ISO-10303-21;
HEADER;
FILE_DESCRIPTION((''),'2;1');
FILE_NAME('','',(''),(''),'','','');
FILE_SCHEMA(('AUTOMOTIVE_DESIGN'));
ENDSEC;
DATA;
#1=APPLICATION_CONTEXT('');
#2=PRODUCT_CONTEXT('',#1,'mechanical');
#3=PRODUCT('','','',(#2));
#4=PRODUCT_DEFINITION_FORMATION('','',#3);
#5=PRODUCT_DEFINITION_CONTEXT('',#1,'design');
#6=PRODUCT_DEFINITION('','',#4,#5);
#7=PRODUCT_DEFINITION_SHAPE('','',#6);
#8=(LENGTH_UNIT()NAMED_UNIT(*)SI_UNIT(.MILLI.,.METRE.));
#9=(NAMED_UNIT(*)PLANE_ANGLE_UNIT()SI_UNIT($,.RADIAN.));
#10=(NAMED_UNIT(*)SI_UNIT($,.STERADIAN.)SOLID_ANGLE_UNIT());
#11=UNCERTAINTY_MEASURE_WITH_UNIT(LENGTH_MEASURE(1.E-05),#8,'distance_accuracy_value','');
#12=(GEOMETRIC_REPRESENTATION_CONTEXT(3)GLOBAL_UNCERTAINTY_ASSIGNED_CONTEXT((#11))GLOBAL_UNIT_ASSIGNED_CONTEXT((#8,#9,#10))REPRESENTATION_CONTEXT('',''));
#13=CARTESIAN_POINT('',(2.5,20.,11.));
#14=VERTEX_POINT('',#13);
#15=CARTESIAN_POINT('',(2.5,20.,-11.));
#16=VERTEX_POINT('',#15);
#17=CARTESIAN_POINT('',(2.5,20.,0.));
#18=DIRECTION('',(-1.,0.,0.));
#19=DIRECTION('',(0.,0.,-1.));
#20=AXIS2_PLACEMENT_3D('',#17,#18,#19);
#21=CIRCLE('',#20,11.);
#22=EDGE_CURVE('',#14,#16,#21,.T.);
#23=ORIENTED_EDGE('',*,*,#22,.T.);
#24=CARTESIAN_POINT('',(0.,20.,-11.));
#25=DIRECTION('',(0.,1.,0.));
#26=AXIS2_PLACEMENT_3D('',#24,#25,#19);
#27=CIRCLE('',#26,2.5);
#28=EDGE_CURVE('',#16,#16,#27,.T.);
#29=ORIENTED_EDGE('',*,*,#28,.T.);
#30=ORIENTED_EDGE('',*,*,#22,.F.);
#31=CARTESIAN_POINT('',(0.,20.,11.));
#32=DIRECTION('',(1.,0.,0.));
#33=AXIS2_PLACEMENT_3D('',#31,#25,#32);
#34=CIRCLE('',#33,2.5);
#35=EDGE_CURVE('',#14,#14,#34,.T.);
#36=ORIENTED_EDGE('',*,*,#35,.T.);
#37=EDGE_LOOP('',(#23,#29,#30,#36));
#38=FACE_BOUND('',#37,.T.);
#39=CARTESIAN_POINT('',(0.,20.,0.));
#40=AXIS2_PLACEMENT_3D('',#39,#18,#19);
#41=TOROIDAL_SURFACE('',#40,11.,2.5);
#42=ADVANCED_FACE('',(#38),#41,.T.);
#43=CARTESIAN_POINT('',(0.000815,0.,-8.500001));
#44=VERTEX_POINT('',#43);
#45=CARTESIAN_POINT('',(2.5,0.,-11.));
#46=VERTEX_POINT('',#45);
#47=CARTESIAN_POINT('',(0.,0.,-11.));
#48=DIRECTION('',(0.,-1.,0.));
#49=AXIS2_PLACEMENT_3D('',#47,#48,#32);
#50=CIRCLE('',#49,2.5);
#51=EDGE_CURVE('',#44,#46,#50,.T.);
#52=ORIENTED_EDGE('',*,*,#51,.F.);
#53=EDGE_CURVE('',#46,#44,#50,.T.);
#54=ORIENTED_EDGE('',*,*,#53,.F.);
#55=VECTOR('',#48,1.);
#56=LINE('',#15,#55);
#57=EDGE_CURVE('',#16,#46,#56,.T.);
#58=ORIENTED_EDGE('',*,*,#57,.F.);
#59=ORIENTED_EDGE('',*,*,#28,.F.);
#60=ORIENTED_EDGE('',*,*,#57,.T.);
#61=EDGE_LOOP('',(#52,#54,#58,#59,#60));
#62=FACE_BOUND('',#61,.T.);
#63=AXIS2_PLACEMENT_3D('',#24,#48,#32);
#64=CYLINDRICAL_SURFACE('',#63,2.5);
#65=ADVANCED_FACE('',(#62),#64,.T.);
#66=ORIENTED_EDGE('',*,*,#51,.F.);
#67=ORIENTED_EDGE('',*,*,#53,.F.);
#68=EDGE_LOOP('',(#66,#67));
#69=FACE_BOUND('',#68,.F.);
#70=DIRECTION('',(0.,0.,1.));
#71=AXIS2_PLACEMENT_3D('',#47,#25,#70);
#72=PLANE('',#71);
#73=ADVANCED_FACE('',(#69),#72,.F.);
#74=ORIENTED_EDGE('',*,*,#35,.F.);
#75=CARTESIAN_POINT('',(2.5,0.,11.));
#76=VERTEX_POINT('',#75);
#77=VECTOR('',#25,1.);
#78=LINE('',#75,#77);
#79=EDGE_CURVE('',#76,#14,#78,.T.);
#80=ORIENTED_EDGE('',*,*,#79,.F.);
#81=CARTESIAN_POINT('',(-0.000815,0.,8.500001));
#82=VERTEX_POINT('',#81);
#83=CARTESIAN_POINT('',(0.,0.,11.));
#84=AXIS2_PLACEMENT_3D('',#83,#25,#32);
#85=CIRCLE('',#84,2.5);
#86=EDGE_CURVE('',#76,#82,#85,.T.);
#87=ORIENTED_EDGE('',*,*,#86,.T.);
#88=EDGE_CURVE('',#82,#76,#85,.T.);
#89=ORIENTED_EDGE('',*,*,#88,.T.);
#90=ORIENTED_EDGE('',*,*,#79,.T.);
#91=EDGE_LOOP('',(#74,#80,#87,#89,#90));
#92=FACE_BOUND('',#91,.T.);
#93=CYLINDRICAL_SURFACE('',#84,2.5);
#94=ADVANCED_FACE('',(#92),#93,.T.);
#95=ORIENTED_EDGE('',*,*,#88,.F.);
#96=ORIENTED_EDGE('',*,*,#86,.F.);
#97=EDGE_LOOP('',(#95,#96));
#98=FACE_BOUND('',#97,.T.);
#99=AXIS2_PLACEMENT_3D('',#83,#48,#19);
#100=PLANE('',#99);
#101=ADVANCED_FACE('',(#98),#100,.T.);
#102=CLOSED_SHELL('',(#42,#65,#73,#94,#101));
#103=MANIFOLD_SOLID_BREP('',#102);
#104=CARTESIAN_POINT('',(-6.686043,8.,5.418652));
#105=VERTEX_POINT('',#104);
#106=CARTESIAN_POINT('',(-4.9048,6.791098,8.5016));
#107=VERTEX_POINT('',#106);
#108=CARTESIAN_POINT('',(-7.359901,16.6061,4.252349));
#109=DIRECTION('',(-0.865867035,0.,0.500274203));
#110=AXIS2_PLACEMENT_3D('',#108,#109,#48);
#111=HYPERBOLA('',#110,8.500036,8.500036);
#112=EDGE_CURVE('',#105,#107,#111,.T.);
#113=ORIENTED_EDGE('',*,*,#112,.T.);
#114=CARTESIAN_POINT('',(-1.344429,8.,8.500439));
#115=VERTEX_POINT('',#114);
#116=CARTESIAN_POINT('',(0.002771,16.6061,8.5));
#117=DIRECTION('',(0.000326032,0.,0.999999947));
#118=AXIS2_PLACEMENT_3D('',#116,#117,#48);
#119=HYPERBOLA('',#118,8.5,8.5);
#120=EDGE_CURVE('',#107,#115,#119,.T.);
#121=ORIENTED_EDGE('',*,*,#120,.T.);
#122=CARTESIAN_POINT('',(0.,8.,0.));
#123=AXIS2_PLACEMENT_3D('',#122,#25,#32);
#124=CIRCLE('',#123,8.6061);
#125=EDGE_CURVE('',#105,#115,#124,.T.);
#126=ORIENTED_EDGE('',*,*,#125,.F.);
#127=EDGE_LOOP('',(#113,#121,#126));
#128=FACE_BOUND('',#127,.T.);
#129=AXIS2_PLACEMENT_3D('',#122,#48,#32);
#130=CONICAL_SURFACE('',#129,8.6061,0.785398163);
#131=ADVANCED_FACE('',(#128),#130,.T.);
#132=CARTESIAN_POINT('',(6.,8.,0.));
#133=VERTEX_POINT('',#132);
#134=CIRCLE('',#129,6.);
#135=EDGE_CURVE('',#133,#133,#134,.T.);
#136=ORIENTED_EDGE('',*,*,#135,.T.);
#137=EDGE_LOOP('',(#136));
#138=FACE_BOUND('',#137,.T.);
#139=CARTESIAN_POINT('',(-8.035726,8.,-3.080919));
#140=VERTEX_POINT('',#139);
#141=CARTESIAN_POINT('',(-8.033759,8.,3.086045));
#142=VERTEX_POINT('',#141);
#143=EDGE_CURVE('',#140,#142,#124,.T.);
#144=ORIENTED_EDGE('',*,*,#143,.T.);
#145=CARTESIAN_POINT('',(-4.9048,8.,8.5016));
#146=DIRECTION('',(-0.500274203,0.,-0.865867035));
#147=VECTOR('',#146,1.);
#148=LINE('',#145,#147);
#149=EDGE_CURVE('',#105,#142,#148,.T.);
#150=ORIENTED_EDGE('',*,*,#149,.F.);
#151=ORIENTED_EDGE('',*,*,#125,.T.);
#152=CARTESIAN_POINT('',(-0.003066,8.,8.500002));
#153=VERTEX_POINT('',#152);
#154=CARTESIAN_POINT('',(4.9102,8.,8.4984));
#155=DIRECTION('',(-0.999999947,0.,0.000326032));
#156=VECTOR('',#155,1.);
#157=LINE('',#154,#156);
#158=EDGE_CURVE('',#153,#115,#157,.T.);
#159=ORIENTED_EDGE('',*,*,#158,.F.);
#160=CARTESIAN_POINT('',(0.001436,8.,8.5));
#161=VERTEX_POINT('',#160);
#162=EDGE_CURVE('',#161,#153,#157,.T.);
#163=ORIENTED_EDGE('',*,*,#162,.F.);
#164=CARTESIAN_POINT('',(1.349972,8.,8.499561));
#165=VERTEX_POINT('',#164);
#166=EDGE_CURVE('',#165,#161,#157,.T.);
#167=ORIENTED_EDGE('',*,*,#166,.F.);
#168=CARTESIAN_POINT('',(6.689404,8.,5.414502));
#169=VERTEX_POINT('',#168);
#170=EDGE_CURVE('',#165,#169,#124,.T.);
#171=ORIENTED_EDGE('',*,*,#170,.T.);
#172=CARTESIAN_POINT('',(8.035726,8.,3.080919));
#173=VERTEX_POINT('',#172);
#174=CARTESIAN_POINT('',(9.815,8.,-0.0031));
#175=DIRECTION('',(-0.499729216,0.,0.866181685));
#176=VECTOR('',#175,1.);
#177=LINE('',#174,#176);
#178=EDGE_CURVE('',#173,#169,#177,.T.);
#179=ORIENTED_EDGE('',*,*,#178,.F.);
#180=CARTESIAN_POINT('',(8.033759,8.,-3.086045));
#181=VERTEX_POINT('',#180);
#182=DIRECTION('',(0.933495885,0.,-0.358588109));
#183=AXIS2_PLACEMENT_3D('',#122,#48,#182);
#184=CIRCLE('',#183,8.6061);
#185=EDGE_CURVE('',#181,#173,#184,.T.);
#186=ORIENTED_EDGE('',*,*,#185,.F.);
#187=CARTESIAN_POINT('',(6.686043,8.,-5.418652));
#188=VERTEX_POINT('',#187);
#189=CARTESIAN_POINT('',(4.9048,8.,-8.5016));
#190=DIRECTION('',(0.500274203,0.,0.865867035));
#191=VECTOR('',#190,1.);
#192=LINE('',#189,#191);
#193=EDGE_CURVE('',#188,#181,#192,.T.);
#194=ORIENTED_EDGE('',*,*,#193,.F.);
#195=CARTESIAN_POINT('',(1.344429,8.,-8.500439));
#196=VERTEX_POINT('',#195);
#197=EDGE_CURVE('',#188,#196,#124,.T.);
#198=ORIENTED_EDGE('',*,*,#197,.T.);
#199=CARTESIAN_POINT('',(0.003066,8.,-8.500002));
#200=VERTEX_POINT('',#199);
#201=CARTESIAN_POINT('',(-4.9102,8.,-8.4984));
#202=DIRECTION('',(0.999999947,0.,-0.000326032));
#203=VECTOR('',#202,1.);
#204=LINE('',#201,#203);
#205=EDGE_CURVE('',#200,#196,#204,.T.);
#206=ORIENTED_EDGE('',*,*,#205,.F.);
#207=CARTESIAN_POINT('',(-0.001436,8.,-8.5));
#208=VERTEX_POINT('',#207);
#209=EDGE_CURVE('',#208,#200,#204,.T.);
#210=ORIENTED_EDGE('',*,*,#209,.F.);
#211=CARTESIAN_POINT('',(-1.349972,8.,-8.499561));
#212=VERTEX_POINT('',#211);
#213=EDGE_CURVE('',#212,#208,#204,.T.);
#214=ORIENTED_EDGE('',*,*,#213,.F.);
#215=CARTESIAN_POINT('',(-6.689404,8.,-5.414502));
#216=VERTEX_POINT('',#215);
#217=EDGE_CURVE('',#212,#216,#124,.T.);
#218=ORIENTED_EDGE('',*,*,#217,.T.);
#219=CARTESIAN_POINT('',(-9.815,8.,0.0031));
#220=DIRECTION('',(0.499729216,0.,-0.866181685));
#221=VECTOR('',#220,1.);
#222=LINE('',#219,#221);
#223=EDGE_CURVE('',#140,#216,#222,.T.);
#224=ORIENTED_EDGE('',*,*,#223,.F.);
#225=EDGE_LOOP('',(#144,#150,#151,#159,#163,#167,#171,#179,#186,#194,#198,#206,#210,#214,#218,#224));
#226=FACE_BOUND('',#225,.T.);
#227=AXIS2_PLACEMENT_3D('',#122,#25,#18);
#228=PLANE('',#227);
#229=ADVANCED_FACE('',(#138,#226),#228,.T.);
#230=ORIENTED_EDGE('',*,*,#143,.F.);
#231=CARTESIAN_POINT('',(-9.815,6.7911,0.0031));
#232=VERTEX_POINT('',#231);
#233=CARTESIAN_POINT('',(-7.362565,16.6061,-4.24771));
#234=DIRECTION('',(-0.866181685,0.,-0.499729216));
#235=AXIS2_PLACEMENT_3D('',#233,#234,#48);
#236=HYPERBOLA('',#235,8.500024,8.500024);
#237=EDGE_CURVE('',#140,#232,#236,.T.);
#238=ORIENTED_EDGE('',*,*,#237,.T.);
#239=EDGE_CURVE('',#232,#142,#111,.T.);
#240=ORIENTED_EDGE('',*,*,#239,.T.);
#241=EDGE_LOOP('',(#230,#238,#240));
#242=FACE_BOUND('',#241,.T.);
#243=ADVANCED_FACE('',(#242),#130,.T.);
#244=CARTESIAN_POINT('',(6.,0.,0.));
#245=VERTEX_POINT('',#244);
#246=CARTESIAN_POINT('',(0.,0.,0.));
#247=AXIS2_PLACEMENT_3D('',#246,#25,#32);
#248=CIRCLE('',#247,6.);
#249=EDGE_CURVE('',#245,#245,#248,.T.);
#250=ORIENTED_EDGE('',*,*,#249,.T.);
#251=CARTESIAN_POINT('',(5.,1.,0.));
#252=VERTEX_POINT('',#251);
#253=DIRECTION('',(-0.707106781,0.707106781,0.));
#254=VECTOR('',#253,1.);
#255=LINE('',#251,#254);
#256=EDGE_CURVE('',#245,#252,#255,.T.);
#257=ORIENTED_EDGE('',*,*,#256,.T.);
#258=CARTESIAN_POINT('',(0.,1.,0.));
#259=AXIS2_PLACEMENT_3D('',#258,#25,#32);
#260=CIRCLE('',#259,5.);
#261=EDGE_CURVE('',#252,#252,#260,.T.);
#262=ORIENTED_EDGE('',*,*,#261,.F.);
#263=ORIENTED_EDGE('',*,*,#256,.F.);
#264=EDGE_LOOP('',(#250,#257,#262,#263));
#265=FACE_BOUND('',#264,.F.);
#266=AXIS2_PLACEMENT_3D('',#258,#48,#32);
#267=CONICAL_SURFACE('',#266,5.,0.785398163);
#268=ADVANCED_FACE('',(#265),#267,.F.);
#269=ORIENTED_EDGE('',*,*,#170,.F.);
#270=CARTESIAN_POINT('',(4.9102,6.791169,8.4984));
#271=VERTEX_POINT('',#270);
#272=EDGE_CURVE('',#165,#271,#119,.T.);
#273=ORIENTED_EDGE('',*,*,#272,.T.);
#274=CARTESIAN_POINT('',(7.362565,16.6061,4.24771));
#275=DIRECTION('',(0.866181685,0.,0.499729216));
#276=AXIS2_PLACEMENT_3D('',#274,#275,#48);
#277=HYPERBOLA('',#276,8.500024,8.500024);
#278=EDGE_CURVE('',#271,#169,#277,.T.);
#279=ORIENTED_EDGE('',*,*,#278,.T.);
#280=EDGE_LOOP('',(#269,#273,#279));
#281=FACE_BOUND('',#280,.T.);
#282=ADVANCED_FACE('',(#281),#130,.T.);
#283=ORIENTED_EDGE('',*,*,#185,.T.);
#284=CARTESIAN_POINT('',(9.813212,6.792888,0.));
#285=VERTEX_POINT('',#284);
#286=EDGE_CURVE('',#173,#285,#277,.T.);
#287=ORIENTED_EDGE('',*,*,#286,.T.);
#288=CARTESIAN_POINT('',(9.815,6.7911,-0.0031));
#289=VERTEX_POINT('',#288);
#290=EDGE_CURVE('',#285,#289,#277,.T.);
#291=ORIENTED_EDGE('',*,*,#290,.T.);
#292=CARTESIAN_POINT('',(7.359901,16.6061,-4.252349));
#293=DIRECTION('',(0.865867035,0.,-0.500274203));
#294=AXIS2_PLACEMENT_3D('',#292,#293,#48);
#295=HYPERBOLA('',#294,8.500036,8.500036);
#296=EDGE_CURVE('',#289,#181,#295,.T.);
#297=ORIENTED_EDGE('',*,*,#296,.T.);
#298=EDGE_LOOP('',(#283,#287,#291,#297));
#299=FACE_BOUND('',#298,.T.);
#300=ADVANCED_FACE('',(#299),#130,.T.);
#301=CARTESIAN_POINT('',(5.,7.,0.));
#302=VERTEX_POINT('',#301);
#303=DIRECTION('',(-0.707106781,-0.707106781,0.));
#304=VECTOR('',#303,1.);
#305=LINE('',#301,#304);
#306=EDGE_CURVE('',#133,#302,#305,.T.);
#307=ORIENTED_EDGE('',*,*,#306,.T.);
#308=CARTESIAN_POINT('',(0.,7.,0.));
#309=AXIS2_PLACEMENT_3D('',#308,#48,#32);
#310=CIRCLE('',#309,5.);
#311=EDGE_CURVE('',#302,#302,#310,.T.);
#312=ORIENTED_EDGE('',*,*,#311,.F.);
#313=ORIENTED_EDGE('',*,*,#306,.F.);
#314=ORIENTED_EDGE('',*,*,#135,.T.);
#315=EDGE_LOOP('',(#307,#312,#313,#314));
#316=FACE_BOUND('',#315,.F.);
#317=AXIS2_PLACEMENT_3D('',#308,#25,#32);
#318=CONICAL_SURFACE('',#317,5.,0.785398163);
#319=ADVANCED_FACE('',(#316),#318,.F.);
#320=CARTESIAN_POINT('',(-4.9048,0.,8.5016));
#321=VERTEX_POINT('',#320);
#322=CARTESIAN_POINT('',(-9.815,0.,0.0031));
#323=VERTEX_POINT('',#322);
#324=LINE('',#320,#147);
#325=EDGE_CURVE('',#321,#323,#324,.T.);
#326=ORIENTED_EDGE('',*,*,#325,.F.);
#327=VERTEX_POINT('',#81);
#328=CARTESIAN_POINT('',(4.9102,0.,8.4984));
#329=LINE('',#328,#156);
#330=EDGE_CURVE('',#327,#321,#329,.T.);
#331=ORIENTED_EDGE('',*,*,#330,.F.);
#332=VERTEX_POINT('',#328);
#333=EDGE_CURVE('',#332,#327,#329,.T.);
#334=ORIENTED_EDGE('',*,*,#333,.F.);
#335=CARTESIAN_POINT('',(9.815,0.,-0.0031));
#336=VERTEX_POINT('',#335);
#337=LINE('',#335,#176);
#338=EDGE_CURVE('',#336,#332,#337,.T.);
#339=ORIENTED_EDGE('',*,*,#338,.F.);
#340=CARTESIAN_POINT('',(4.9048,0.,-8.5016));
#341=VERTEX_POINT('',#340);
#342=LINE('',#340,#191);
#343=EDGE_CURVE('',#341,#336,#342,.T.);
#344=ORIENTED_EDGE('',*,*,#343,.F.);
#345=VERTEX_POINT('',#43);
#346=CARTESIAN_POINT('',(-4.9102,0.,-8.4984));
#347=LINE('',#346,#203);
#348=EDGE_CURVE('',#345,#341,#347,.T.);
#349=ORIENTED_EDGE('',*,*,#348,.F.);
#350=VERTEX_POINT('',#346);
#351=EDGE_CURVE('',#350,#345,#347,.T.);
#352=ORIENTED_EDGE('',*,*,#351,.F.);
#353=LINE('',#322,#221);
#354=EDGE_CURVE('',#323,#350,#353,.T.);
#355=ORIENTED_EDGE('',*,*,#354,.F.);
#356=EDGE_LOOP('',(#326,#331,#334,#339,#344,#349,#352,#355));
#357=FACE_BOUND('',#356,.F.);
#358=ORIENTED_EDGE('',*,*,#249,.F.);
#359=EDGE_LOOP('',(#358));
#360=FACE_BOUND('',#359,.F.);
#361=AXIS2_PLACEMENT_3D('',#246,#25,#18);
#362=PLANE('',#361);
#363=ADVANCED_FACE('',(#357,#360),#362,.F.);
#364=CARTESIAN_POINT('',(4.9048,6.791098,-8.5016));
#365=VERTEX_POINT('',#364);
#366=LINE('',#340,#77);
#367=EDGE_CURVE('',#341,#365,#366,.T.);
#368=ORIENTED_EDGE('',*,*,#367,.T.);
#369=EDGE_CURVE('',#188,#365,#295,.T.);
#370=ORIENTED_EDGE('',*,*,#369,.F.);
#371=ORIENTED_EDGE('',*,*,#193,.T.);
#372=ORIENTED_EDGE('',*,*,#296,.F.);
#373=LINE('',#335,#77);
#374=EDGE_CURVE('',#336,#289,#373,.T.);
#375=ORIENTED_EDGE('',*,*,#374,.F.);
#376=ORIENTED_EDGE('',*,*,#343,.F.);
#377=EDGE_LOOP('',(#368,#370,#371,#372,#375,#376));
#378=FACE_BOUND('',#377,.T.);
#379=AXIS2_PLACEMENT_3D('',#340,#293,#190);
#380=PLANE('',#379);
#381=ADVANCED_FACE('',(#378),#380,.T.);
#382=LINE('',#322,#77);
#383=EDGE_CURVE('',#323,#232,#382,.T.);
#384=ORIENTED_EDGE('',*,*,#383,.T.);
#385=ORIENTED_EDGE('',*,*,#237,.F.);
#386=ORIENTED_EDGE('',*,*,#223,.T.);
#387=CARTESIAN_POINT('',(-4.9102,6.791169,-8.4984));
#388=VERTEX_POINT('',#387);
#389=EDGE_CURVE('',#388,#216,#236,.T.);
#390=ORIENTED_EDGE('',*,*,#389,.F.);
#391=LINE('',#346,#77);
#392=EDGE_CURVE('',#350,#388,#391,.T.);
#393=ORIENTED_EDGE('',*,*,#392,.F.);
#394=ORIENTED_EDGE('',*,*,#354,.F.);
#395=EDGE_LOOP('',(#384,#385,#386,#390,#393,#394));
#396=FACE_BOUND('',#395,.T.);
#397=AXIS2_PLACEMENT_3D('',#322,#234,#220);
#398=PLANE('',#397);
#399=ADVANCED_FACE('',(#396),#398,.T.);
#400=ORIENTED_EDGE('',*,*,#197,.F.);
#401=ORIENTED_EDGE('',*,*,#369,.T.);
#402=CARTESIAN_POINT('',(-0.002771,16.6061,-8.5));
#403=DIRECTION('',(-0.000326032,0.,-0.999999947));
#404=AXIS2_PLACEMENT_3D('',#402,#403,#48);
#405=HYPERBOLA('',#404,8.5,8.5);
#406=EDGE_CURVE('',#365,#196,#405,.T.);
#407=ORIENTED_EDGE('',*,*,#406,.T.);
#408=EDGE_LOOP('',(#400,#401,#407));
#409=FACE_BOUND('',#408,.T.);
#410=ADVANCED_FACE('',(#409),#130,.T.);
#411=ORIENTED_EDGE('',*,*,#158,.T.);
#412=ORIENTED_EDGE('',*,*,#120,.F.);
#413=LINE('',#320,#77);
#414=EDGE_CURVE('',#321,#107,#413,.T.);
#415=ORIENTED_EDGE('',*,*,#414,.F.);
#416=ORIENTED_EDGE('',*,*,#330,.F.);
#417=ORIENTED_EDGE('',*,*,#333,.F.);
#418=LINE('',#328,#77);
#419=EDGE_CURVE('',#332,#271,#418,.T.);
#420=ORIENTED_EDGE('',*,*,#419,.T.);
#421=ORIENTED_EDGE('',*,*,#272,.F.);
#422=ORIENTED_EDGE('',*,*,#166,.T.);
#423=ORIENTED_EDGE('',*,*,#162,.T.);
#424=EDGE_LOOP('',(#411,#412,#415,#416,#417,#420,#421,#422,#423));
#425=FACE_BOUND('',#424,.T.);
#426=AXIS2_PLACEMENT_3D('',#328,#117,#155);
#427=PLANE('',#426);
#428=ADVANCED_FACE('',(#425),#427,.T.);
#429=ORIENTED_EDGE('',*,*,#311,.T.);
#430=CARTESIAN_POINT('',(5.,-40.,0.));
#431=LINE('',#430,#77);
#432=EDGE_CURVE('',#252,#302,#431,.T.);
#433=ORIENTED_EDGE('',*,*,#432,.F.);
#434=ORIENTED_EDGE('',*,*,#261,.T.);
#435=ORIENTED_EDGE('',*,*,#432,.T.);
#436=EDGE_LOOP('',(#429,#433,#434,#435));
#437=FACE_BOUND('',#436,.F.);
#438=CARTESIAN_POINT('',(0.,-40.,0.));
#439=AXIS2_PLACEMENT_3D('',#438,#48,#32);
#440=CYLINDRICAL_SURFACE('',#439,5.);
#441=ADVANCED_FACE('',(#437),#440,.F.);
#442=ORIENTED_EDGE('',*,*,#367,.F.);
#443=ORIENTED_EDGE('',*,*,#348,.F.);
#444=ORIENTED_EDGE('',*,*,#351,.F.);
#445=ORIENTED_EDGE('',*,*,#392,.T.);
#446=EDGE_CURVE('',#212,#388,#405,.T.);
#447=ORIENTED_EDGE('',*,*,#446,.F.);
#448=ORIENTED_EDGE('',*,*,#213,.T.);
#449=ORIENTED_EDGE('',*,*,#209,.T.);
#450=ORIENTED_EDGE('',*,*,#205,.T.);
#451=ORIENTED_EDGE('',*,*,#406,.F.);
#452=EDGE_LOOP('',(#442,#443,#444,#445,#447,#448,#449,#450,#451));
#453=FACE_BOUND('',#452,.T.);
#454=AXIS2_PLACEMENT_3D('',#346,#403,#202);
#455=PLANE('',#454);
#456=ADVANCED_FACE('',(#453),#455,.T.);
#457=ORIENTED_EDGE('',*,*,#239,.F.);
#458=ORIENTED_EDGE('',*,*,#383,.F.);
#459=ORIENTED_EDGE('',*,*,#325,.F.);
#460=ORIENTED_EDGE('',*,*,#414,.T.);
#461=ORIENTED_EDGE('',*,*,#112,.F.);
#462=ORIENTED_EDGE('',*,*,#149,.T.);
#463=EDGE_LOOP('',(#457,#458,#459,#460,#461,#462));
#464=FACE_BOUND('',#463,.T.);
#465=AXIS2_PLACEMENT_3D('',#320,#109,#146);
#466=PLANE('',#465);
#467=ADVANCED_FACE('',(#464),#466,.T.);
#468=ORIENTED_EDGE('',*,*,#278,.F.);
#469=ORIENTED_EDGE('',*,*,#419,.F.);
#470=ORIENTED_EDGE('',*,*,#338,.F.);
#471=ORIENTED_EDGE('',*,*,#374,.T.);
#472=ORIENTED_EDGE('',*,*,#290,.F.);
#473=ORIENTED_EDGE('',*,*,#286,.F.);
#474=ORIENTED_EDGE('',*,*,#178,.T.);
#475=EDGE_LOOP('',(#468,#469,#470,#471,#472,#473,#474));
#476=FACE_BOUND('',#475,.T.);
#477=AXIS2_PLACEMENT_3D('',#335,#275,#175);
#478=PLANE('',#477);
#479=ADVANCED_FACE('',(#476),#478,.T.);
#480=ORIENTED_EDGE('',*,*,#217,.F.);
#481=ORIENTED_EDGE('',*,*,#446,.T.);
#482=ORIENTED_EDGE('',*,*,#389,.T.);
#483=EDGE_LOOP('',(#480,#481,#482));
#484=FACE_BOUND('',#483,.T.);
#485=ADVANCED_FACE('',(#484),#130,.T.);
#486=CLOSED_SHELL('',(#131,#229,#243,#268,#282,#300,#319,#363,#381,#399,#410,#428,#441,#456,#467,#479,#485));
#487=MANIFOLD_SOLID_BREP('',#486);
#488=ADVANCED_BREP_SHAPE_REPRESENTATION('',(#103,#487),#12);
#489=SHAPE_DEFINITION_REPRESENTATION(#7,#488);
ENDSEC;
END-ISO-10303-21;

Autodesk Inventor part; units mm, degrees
ref_plane "YZ Plane" through (0, 0, 0) normal (1, 0, 0) x (0, 1, 0)
ref_plane "XZ Plane" through (0, 0, 0) normal (0, 1, 0) x (-1, 0, 0)
ref_plane "XY Plane" through (0, 0, 0) normal (0, 0, 1) x (1, 0, 0)
sketch "Sketch3" plane through (0, 0, 0) normal (0, 1, 0) x (-1, 0, 0)
  line L0 (-4.9048, -8.5016) -> (-9.815, -0.0031)
  line L1 (-9.815, -0.0031) -> (-4.9102, 8.4984)
  line L2 (-4.9102, 8.4984) -> (4.9048, 8.5016)
  line L3 (4.9048, 8.5016) -> (9.815, 0.0031)
  line L4 (9.815, 0.0031) -> (4.9102, -8.4984)
  line L5 (4.9102, -8.4984) -> (-4.9048, -8.5016)
  point P0 (0, 0)
  point P1 (0, 0)
  dimension "d1" = 17
extrude "Extrusion1" add sketch "Sketch3" along normal blind 8
sketch "Sketch4" plane through (0, 8, 0) normal (0, 1, 0) x (1, 0, 0)
  circle A0 centre (0, 0) radius 8.6061
extrude "Extrusion2" cut sketch "Sketch4" against normal through all draft 45 keep common part
sketch "Sketch5" plane through (0, 0, 0) normal (0, -1, 0) x (1, 0, 0)
  circle A0 centre (0, 0) radius 5
  dimension "d6" = 10
extrude "Extrusion3" add sketch "Sketch5" along normal blind 40
sketch "Sketch6" plane through (0, 0, 0) normal (1, 0, 0) x (0, 1, 0)
  line L0 (-42, 5) -> (-43.5, 5)
  line L1 (-40, 5) -> (-40, -5) projected
  line L2 (-43.5, 5) -> (-42.9232, 4.001)
  line L3 (-43.5, 5) -> (-41.3699, 5) construction
  line L4 (-42, 5) -> (-42.5768, 4.001)
  line L5 (-42, 5) -> (-39, 5) construction
  arc A0 (-42.9232, 4.001) -> (-42.5768, 4.001) centre (-42.75, 4.101) ccw
  point P0 (0, 0)
  dimension "d10" = 1.5
  dimension "d11" = 2
  dimension "d12" = 60
  dimension "d13" = 120
  dimension "d14" = 0.2
coil "Coil2" sketch "Sketch6" operation cut axis through (0, -10, 0) along (0, 1, 0) pitch 1.7 turns 24.705882 hand right
sketch "Sketch18" plane through (0, 0, 0) normal (1, 0, 0) x (0, 1, 0)
  line L0 (0, 11) -> (20, 11)
  line L1 (0, -11) -> (20, -11) construction
  line L2 (0, -0.0031) -> (6.7911, -0.0031) projected
  arc A0 (20, -11) -> (20, 11) centre (20, 0) ccw
  line L3 (20, -11) -> (0, -11)
  line L4 (0, -0.0031) -> (0, 8.4984) projected
  point P0 (0, 0)
  dimension "d92" = 20
  dimension "d95" = 11.0031
  dimension "d97" = 11
  dimension "d101" = 20
  dimension "d102" = 0
sketch "Sketch19" plane through (0, 0, 0) normal (0, -1, 0) x (1, 0, 0)
  circle A0 centre (0, 11) radius 2.5
  point P0 (0, 0)
  dimension "d98" = 5
sweep "Sweep1" add profiles "Sketch19" path "Sketch18" path curves L0 A0 L3
sketch "Sketch20" plane through (0, -40, 0) normal (0, -1, 0) x (1, 0, 0)
  circle A0 centre (0, 0) radius 5
  dimension "d103" = 10
extrude "Extrusion11" cut sketch "Sketch20" against normal blind 50
chamfer "Chamfer2" distance 1 angle 45 2 edges at (-5, 8, 0) (-5, 0, 0)
properties part number "Bolt"
